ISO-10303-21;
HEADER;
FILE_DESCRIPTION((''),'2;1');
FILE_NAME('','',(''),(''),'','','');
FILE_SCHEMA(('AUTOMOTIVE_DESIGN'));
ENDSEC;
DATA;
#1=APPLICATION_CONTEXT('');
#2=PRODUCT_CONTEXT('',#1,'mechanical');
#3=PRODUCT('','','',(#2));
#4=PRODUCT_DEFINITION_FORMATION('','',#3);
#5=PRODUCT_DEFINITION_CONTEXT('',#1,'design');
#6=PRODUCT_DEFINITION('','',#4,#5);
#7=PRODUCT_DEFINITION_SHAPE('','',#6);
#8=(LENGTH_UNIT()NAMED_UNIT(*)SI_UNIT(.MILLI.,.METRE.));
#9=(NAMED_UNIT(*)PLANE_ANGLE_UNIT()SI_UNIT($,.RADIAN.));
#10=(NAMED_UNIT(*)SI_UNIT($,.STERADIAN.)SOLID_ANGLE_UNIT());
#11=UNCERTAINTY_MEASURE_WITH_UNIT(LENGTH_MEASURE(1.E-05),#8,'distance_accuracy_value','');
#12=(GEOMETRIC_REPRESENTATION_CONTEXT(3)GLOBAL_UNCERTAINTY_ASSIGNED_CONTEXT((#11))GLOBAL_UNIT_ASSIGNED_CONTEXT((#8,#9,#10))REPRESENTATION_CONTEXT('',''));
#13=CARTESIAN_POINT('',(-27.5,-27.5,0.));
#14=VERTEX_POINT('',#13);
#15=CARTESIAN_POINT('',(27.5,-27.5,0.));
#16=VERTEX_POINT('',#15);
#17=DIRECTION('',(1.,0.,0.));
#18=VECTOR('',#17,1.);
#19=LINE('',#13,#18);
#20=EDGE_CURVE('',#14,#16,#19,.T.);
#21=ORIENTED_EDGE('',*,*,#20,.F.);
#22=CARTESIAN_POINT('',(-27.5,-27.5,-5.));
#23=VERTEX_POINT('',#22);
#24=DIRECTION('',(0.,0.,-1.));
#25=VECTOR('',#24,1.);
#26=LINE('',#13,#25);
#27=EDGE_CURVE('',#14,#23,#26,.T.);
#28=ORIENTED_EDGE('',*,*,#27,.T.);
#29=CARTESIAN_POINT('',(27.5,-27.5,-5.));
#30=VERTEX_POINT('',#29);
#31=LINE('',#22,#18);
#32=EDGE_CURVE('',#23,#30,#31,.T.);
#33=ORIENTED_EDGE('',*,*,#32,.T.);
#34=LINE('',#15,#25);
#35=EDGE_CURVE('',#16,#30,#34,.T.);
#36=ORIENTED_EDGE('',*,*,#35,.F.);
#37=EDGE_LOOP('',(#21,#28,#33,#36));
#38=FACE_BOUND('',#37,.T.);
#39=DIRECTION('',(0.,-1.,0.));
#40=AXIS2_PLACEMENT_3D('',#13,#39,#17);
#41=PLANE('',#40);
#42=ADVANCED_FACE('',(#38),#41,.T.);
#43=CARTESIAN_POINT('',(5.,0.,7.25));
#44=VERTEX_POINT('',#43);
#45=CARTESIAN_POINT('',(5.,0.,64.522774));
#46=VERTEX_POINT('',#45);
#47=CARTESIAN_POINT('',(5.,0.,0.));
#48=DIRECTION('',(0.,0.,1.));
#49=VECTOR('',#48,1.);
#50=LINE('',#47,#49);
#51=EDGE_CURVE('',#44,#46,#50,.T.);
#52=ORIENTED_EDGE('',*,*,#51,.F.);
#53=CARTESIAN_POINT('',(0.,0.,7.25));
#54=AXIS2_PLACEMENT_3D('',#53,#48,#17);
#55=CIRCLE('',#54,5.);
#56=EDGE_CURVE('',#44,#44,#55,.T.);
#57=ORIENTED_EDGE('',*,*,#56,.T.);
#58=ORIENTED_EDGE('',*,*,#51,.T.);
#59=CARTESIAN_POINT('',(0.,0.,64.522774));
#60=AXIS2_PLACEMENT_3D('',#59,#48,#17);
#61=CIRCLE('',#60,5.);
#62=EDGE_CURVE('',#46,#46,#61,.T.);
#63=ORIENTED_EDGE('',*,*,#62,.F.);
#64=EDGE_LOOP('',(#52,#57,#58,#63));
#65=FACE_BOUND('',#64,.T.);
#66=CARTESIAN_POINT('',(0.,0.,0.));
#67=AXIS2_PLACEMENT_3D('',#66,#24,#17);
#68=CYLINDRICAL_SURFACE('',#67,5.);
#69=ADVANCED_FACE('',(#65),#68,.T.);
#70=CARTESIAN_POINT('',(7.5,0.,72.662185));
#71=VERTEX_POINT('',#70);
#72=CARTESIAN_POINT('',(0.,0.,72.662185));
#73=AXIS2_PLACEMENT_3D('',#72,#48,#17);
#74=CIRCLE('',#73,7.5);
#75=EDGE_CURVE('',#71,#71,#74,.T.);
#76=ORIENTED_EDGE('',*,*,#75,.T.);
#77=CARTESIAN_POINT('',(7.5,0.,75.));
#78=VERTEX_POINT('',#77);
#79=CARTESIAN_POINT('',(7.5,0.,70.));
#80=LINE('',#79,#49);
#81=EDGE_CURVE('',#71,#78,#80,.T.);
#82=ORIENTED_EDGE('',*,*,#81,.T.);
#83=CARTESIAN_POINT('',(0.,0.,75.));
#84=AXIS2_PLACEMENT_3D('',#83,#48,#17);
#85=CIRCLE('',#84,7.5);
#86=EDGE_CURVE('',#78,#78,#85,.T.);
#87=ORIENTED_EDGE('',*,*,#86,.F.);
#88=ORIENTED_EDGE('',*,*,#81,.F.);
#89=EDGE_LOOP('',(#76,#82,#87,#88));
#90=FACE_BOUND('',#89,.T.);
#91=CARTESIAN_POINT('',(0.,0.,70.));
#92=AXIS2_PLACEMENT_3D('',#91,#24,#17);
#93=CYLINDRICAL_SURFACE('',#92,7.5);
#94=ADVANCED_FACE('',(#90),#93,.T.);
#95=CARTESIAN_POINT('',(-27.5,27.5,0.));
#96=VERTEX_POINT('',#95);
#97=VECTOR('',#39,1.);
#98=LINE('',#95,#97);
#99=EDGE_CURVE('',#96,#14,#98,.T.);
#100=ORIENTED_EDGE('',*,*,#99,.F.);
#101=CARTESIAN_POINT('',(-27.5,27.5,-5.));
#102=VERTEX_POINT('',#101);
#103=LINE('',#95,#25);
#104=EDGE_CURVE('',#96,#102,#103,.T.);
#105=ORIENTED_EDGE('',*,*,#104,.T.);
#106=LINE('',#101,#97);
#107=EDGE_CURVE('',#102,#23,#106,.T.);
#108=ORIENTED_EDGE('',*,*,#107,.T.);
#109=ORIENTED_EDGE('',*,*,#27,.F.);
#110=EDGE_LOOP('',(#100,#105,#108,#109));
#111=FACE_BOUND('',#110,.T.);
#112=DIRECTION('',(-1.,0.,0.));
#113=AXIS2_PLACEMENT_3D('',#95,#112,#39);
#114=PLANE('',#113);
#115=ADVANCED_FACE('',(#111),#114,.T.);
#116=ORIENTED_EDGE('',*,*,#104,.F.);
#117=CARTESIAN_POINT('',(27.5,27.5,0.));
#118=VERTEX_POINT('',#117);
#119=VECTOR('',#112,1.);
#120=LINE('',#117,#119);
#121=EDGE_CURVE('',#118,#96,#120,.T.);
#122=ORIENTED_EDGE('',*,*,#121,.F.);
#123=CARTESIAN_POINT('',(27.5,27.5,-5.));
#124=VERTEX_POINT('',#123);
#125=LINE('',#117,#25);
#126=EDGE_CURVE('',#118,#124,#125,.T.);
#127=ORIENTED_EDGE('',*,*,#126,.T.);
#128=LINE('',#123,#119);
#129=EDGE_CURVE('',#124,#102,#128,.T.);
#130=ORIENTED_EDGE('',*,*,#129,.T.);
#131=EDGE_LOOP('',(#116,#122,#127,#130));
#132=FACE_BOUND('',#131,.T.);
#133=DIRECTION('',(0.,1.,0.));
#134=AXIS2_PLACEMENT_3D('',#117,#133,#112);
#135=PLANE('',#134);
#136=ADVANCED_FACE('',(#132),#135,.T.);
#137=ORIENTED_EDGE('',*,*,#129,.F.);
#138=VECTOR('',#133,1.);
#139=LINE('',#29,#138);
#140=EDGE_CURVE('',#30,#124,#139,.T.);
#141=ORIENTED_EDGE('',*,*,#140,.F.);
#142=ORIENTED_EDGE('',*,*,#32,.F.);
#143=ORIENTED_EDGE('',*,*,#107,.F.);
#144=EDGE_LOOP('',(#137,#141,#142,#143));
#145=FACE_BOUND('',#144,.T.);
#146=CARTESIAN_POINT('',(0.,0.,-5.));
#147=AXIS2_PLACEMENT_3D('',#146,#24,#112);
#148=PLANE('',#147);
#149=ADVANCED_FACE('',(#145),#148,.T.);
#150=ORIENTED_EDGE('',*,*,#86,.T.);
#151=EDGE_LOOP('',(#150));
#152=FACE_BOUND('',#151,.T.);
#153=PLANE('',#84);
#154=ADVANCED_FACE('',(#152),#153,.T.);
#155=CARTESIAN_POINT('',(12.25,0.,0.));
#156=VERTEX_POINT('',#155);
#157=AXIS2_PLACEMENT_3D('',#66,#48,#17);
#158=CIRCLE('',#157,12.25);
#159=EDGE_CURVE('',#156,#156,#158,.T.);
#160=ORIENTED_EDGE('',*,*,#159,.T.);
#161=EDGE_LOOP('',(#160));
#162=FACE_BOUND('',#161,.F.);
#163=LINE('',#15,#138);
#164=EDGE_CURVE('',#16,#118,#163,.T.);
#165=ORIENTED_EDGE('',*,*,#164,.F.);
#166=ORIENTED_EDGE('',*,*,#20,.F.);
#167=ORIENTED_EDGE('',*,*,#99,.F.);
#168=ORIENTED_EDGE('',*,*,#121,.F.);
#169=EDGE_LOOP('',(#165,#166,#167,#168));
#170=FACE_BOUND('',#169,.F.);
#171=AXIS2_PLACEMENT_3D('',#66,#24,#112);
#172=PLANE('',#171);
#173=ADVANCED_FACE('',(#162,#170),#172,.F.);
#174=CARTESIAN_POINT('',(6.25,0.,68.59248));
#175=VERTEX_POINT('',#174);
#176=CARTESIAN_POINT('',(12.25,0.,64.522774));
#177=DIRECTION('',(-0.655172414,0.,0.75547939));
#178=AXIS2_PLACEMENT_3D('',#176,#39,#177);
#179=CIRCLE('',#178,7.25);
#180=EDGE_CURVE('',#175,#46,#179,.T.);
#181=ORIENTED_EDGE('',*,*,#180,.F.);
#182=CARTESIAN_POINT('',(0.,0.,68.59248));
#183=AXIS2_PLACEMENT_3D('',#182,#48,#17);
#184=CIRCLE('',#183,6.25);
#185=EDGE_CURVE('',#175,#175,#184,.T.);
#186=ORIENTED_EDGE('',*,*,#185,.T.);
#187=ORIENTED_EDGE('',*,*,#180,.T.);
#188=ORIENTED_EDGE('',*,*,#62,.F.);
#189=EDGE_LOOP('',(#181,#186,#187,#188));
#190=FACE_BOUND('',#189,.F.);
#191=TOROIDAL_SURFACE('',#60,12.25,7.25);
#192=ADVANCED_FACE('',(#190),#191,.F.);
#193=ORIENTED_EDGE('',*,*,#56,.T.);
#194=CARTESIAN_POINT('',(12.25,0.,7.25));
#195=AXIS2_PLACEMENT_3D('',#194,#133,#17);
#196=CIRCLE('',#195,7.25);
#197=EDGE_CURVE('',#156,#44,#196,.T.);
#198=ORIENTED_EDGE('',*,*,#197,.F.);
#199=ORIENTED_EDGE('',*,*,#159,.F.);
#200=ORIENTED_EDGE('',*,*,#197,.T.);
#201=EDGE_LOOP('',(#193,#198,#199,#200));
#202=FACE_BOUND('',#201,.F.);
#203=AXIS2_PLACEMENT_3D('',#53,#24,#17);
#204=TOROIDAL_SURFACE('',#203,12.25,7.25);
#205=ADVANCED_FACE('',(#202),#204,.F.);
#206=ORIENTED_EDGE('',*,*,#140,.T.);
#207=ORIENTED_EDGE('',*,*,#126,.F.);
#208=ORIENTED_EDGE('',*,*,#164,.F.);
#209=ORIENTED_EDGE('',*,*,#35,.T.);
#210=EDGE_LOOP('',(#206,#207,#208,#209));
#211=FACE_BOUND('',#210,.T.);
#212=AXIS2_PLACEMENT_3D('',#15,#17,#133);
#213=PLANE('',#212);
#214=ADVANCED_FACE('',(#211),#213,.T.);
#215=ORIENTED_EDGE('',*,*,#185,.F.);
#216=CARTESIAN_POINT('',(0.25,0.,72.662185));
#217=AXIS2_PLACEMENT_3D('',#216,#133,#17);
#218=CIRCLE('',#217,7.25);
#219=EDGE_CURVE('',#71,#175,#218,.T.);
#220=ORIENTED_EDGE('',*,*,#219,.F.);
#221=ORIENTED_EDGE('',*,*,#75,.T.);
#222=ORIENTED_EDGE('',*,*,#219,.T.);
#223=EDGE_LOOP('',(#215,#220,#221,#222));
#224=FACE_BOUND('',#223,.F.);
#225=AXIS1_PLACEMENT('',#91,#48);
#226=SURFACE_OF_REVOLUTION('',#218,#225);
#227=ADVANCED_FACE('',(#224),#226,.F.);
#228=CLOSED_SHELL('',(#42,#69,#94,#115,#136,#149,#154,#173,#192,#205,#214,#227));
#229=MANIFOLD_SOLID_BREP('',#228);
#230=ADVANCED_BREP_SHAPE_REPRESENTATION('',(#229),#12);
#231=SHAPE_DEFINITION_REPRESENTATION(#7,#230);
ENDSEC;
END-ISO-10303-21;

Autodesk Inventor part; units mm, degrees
ref_plane "YZ Plane" through (0, 0, 0) normal (1, 0, 0) x (0, 1, 0)
ref_plane "XZ Plane" through (0, 0, 0) normal (0, 1, 0) x (-1, 0, 0)
ref_plane "XY Plane" through (0, 0, 0) normal (0, 0, 1) x (1, 0, 0)
sketch "Sketch1" plane through (0, 0, 0) normal (0, 0, 1) x (1, 0, 0)
  circle A0 centre (0, 0) radius 5
  dimension "d0" = 10
extrude "Extrusion1" add sketch "Sketch1" along normal blind 70
sketch "Sketch2" plane through (0, 0, 70) normal (0, 0, 1) x (1, 0, 0)
  circle A0 centre (0, 0) radius 7.5
  dimension "d3" = 15
extrude "Extrusion2" add sketch "Sketch2" along normal blind 5
fillet "Fillet1" radius 7.25 2 edges at (-5, 0, 70) (-7.5, 0, 70)
sketch "Sketch3" plane through (0, 0, 0) normal (0, 0, -1) x (-1, 0, 0)
  line L0 (27.5, -27.5) -> (-27.5, -27.5)
  line L1 (-27.5, -27.5) -> (-27.5, 27.5)
  line L2 (-27.5, 27.5) -> (27.5, 27.5)
  line L3 (27.5, 27.5) -> (27.5, -27.5)
  line L4 (27.5, -27.5) -> (-27.5, 27.5) construction
  line L5 (-27.5, -27.5) -> (27.5, 27.5) construction
  point P0 (0, 0)
  dimension "d7" = 55
  dimension "d8" = 55
extrude "Extrusion3" add sketch "Sketch3" along normal blind 5
fillet "Fillet2" radius 7.25 1 edges at (-5, 0, 0)
properties part number "Base"
